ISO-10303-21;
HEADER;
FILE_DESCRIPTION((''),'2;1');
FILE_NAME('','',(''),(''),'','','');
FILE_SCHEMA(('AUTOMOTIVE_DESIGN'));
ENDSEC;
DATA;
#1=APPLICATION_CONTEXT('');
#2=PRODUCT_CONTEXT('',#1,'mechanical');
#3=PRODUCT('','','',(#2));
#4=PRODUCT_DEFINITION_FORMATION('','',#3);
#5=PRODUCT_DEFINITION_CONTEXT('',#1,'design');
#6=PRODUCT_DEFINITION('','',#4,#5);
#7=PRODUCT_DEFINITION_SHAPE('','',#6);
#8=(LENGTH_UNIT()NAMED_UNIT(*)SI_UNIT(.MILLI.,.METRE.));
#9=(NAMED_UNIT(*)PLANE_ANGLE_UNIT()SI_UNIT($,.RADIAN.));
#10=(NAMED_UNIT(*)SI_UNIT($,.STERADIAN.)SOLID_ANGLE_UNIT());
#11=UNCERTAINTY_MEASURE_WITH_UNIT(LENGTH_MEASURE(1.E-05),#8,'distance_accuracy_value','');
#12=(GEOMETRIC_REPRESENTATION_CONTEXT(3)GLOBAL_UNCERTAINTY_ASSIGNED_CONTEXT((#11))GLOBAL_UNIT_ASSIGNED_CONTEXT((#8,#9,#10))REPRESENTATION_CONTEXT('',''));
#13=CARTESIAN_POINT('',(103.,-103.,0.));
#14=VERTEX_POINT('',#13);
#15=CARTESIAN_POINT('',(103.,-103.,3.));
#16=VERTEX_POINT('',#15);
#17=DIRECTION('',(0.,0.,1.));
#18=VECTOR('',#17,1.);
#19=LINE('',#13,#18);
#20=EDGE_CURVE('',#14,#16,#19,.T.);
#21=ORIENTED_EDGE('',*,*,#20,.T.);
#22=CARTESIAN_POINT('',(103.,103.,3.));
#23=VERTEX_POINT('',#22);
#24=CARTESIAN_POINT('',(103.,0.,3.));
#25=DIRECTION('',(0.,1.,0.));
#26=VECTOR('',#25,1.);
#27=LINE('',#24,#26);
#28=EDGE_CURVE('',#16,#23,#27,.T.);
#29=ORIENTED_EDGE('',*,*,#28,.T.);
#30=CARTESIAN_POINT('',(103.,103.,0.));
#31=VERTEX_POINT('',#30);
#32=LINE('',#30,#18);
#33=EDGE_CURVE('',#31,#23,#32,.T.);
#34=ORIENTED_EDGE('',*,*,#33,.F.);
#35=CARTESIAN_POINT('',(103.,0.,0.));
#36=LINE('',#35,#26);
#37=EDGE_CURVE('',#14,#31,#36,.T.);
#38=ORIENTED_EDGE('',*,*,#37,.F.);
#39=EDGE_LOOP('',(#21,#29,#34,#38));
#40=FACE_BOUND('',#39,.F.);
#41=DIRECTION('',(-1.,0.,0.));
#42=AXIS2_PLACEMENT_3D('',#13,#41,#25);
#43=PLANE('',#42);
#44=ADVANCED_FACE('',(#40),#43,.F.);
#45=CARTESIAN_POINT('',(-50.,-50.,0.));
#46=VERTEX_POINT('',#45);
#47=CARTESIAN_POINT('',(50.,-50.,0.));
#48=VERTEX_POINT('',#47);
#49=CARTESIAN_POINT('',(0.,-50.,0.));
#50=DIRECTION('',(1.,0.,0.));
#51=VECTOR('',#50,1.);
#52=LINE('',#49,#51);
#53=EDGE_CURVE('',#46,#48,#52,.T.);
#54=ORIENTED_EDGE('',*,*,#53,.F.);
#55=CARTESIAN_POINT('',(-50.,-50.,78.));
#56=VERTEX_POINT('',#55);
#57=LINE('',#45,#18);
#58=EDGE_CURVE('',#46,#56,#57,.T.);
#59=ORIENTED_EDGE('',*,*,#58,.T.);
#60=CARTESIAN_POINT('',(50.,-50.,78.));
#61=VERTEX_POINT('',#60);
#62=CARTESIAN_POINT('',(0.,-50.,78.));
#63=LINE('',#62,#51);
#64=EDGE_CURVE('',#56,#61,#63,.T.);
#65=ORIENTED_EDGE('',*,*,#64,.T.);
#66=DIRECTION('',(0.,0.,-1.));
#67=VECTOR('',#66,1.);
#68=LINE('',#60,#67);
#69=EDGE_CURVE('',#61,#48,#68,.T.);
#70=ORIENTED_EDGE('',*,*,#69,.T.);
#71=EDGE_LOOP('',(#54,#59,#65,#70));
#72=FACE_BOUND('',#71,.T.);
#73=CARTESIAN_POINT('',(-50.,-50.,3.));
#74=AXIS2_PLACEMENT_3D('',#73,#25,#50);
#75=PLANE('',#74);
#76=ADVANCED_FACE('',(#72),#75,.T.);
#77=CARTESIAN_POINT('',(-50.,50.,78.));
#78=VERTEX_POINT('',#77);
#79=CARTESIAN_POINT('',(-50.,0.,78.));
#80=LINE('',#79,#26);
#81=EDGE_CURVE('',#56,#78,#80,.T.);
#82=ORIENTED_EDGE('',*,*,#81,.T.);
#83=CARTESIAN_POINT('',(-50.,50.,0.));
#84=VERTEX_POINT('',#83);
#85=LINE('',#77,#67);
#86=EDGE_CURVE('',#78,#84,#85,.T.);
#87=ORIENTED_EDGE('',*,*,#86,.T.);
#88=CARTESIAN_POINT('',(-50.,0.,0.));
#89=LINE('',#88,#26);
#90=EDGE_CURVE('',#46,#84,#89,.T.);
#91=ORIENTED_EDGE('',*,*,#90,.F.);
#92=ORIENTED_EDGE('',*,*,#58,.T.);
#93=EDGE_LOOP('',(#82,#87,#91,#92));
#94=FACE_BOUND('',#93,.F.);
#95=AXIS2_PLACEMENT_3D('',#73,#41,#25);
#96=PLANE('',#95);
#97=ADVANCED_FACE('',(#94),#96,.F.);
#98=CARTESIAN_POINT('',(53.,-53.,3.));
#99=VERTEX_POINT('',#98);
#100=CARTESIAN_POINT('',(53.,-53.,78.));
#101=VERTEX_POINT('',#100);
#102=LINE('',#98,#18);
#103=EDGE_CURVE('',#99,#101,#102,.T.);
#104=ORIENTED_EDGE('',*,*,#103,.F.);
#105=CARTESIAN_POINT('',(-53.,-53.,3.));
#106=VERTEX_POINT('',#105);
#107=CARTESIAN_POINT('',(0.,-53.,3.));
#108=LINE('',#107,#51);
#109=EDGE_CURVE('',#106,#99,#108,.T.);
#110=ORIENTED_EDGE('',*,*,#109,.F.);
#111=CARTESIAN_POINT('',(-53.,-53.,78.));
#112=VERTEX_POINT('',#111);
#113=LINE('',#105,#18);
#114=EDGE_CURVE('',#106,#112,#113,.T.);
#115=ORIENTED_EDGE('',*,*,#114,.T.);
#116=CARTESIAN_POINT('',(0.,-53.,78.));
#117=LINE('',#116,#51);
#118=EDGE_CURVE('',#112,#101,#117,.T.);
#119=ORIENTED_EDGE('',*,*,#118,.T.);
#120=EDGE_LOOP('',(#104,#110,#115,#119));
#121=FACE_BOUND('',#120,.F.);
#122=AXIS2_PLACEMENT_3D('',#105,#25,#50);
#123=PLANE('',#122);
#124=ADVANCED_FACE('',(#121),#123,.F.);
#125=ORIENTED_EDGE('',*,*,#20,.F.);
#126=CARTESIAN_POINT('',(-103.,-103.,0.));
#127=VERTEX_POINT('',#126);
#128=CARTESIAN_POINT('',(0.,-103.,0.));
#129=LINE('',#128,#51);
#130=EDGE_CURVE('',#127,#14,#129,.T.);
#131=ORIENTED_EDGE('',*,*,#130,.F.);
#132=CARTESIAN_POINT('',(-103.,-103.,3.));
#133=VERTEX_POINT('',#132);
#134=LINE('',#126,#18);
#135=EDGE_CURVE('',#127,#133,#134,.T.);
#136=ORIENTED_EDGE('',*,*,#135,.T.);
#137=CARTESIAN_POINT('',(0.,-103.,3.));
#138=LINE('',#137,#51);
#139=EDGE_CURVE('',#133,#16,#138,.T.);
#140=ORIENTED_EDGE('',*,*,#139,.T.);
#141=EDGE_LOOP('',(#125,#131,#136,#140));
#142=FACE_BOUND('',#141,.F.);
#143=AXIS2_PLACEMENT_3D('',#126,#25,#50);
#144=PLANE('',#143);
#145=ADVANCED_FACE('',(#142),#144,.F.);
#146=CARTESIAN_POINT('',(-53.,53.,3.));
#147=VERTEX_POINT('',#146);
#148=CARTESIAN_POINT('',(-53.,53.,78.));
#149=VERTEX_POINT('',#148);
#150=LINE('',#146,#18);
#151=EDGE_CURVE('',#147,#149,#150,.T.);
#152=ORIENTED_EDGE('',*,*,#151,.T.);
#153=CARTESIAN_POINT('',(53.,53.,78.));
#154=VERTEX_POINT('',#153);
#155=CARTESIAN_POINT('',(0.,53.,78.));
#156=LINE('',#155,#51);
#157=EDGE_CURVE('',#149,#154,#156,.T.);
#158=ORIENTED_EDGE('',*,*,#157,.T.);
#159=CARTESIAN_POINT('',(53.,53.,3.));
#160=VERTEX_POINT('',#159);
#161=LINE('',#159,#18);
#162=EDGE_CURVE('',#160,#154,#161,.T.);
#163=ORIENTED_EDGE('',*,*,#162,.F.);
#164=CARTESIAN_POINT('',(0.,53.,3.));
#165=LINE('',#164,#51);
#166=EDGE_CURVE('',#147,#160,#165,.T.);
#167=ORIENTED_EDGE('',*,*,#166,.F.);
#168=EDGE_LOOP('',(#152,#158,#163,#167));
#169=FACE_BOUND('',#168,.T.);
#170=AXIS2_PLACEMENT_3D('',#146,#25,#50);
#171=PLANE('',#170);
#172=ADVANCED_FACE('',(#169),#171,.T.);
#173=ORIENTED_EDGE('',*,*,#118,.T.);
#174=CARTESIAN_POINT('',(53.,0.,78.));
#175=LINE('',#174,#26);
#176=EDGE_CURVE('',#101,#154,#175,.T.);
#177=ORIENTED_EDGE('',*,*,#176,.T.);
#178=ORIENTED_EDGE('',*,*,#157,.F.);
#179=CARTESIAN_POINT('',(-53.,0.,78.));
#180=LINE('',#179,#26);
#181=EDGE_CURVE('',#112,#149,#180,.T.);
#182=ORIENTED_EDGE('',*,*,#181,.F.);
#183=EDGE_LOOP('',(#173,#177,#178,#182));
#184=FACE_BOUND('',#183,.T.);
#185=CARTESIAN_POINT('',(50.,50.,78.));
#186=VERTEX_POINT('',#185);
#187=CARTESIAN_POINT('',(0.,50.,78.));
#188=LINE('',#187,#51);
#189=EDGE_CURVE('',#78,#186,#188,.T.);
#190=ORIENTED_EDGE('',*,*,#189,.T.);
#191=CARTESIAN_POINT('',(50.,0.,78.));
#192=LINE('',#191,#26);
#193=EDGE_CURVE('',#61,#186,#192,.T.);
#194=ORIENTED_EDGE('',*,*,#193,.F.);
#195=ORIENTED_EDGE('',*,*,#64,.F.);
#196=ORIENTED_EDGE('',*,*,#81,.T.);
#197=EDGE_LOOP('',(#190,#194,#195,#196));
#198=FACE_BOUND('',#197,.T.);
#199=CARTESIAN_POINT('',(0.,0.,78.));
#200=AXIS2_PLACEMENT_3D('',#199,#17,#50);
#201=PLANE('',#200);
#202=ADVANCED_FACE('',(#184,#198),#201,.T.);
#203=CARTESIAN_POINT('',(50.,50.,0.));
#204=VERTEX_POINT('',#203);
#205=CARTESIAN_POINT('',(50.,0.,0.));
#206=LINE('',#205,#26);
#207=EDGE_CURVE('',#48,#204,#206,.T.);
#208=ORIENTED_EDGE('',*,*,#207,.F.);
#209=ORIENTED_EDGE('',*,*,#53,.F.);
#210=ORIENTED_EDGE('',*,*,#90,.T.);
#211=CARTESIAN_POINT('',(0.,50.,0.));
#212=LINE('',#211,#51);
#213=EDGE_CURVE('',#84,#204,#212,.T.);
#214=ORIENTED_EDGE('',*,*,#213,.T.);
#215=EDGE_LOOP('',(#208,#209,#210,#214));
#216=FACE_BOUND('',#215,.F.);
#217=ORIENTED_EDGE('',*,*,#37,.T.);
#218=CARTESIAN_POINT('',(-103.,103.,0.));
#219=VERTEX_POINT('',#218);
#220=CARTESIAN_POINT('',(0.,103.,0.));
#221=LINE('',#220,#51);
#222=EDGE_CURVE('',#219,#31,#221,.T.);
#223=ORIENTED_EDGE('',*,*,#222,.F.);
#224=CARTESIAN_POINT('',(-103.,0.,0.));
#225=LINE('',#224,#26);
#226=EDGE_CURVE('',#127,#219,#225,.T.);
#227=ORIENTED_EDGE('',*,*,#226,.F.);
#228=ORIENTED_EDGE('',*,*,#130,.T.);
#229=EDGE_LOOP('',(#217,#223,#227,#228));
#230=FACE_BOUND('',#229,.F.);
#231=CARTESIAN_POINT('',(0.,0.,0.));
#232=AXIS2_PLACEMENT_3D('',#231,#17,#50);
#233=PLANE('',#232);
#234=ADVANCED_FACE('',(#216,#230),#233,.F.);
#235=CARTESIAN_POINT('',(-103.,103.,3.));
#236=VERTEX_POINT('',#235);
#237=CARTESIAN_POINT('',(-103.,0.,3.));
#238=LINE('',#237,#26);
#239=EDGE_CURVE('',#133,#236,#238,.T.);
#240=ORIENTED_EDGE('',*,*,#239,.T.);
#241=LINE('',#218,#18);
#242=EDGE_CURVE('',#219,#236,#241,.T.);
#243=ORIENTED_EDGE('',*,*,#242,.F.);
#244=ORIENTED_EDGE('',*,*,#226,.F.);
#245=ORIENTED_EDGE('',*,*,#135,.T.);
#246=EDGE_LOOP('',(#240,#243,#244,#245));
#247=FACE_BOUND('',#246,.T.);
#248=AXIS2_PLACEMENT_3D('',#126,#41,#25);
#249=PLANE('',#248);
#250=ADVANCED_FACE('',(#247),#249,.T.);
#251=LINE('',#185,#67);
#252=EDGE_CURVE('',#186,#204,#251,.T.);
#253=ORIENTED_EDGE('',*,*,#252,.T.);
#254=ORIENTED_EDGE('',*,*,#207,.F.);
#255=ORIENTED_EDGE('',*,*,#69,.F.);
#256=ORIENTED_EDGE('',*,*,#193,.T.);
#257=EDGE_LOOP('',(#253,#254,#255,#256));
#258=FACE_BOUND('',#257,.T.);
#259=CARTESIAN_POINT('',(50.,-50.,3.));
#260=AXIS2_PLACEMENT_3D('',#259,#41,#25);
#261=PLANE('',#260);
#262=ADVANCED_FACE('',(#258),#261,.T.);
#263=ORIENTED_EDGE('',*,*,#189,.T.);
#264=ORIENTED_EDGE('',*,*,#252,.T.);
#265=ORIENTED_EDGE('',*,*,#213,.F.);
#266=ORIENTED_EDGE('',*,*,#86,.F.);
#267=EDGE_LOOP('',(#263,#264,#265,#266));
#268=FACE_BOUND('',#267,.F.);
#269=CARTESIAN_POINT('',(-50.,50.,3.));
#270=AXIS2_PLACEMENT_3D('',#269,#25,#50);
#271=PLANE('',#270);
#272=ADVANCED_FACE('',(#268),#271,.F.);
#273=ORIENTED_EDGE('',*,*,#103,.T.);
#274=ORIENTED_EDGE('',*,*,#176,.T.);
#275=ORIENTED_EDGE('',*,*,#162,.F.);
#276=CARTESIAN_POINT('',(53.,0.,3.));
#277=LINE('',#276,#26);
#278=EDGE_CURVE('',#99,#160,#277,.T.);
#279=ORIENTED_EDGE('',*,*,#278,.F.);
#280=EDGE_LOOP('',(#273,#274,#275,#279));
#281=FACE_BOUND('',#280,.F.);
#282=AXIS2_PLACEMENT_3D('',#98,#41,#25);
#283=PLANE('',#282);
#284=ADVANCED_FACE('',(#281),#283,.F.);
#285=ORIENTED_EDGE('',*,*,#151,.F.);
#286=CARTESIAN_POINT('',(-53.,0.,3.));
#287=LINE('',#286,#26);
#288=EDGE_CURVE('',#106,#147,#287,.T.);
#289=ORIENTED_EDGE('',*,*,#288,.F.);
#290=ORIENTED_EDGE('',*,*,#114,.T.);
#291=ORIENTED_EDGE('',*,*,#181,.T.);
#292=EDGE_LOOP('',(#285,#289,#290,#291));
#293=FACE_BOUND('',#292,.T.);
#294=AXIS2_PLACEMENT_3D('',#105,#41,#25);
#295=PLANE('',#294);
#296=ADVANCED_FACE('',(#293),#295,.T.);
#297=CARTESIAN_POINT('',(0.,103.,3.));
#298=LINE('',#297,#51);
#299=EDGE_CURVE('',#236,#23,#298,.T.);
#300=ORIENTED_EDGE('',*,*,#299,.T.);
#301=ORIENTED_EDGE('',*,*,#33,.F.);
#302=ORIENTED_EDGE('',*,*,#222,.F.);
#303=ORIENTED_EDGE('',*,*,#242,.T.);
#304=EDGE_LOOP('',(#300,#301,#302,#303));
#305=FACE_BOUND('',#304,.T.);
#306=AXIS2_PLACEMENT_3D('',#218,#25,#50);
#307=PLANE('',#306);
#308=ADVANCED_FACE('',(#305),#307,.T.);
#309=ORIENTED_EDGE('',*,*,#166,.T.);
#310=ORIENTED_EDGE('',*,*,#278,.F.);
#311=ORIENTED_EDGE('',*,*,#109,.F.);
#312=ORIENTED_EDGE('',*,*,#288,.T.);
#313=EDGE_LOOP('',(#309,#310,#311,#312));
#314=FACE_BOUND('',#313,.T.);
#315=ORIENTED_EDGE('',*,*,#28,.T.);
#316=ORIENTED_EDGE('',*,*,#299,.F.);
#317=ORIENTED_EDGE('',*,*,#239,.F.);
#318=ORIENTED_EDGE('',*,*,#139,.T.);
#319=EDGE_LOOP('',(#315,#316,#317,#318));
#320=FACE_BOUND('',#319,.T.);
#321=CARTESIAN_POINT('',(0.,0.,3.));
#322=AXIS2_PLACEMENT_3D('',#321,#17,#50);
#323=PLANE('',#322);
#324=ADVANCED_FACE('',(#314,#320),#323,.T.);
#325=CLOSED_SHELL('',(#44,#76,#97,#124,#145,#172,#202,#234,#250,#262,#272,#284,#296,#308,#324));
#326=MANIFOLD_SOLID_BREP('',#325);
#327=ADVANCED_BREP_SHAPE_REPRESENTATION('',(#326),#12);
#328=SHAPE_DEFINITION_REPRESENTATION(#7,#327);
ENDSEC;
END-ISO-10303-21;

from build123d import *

# Parameters (mm, degrees)
F0_W     = 206
F0_H     = 206
F0_W_2   = 100
F0_H_2   = 100
F1_DEPTH = 3
F2_W     = 106
F2_H     = 106
F2_W_2   = 100
F2_H_2   = 100
F3_DEPTH = 75


# Not quite as in the source:
# - a feature names something its author has since deleted; it is built from what else it names


with BuildPart() as f1:
    # F0 (on Top) → F1 (new body)
    with BuildSketch(Plane.XY):
        Rectangle(F0_W, F0_H)
        Rectangle(F0_W_2, F0_H_2, mode=Mode.SUBTRACT)
    extrude(amount=F1_DEPTH)

    # F2 (on face) → F3 (join)
    with BuildSketch(Plane.XY.offset(3)):
        Rectangle(F2_W, F2_H)
        Rectangle(F2_W_2, F2_H_2, mode=Mode.SUBTRACT)
    extrude(amount=F3_DEPTH)


solid = f1.part
